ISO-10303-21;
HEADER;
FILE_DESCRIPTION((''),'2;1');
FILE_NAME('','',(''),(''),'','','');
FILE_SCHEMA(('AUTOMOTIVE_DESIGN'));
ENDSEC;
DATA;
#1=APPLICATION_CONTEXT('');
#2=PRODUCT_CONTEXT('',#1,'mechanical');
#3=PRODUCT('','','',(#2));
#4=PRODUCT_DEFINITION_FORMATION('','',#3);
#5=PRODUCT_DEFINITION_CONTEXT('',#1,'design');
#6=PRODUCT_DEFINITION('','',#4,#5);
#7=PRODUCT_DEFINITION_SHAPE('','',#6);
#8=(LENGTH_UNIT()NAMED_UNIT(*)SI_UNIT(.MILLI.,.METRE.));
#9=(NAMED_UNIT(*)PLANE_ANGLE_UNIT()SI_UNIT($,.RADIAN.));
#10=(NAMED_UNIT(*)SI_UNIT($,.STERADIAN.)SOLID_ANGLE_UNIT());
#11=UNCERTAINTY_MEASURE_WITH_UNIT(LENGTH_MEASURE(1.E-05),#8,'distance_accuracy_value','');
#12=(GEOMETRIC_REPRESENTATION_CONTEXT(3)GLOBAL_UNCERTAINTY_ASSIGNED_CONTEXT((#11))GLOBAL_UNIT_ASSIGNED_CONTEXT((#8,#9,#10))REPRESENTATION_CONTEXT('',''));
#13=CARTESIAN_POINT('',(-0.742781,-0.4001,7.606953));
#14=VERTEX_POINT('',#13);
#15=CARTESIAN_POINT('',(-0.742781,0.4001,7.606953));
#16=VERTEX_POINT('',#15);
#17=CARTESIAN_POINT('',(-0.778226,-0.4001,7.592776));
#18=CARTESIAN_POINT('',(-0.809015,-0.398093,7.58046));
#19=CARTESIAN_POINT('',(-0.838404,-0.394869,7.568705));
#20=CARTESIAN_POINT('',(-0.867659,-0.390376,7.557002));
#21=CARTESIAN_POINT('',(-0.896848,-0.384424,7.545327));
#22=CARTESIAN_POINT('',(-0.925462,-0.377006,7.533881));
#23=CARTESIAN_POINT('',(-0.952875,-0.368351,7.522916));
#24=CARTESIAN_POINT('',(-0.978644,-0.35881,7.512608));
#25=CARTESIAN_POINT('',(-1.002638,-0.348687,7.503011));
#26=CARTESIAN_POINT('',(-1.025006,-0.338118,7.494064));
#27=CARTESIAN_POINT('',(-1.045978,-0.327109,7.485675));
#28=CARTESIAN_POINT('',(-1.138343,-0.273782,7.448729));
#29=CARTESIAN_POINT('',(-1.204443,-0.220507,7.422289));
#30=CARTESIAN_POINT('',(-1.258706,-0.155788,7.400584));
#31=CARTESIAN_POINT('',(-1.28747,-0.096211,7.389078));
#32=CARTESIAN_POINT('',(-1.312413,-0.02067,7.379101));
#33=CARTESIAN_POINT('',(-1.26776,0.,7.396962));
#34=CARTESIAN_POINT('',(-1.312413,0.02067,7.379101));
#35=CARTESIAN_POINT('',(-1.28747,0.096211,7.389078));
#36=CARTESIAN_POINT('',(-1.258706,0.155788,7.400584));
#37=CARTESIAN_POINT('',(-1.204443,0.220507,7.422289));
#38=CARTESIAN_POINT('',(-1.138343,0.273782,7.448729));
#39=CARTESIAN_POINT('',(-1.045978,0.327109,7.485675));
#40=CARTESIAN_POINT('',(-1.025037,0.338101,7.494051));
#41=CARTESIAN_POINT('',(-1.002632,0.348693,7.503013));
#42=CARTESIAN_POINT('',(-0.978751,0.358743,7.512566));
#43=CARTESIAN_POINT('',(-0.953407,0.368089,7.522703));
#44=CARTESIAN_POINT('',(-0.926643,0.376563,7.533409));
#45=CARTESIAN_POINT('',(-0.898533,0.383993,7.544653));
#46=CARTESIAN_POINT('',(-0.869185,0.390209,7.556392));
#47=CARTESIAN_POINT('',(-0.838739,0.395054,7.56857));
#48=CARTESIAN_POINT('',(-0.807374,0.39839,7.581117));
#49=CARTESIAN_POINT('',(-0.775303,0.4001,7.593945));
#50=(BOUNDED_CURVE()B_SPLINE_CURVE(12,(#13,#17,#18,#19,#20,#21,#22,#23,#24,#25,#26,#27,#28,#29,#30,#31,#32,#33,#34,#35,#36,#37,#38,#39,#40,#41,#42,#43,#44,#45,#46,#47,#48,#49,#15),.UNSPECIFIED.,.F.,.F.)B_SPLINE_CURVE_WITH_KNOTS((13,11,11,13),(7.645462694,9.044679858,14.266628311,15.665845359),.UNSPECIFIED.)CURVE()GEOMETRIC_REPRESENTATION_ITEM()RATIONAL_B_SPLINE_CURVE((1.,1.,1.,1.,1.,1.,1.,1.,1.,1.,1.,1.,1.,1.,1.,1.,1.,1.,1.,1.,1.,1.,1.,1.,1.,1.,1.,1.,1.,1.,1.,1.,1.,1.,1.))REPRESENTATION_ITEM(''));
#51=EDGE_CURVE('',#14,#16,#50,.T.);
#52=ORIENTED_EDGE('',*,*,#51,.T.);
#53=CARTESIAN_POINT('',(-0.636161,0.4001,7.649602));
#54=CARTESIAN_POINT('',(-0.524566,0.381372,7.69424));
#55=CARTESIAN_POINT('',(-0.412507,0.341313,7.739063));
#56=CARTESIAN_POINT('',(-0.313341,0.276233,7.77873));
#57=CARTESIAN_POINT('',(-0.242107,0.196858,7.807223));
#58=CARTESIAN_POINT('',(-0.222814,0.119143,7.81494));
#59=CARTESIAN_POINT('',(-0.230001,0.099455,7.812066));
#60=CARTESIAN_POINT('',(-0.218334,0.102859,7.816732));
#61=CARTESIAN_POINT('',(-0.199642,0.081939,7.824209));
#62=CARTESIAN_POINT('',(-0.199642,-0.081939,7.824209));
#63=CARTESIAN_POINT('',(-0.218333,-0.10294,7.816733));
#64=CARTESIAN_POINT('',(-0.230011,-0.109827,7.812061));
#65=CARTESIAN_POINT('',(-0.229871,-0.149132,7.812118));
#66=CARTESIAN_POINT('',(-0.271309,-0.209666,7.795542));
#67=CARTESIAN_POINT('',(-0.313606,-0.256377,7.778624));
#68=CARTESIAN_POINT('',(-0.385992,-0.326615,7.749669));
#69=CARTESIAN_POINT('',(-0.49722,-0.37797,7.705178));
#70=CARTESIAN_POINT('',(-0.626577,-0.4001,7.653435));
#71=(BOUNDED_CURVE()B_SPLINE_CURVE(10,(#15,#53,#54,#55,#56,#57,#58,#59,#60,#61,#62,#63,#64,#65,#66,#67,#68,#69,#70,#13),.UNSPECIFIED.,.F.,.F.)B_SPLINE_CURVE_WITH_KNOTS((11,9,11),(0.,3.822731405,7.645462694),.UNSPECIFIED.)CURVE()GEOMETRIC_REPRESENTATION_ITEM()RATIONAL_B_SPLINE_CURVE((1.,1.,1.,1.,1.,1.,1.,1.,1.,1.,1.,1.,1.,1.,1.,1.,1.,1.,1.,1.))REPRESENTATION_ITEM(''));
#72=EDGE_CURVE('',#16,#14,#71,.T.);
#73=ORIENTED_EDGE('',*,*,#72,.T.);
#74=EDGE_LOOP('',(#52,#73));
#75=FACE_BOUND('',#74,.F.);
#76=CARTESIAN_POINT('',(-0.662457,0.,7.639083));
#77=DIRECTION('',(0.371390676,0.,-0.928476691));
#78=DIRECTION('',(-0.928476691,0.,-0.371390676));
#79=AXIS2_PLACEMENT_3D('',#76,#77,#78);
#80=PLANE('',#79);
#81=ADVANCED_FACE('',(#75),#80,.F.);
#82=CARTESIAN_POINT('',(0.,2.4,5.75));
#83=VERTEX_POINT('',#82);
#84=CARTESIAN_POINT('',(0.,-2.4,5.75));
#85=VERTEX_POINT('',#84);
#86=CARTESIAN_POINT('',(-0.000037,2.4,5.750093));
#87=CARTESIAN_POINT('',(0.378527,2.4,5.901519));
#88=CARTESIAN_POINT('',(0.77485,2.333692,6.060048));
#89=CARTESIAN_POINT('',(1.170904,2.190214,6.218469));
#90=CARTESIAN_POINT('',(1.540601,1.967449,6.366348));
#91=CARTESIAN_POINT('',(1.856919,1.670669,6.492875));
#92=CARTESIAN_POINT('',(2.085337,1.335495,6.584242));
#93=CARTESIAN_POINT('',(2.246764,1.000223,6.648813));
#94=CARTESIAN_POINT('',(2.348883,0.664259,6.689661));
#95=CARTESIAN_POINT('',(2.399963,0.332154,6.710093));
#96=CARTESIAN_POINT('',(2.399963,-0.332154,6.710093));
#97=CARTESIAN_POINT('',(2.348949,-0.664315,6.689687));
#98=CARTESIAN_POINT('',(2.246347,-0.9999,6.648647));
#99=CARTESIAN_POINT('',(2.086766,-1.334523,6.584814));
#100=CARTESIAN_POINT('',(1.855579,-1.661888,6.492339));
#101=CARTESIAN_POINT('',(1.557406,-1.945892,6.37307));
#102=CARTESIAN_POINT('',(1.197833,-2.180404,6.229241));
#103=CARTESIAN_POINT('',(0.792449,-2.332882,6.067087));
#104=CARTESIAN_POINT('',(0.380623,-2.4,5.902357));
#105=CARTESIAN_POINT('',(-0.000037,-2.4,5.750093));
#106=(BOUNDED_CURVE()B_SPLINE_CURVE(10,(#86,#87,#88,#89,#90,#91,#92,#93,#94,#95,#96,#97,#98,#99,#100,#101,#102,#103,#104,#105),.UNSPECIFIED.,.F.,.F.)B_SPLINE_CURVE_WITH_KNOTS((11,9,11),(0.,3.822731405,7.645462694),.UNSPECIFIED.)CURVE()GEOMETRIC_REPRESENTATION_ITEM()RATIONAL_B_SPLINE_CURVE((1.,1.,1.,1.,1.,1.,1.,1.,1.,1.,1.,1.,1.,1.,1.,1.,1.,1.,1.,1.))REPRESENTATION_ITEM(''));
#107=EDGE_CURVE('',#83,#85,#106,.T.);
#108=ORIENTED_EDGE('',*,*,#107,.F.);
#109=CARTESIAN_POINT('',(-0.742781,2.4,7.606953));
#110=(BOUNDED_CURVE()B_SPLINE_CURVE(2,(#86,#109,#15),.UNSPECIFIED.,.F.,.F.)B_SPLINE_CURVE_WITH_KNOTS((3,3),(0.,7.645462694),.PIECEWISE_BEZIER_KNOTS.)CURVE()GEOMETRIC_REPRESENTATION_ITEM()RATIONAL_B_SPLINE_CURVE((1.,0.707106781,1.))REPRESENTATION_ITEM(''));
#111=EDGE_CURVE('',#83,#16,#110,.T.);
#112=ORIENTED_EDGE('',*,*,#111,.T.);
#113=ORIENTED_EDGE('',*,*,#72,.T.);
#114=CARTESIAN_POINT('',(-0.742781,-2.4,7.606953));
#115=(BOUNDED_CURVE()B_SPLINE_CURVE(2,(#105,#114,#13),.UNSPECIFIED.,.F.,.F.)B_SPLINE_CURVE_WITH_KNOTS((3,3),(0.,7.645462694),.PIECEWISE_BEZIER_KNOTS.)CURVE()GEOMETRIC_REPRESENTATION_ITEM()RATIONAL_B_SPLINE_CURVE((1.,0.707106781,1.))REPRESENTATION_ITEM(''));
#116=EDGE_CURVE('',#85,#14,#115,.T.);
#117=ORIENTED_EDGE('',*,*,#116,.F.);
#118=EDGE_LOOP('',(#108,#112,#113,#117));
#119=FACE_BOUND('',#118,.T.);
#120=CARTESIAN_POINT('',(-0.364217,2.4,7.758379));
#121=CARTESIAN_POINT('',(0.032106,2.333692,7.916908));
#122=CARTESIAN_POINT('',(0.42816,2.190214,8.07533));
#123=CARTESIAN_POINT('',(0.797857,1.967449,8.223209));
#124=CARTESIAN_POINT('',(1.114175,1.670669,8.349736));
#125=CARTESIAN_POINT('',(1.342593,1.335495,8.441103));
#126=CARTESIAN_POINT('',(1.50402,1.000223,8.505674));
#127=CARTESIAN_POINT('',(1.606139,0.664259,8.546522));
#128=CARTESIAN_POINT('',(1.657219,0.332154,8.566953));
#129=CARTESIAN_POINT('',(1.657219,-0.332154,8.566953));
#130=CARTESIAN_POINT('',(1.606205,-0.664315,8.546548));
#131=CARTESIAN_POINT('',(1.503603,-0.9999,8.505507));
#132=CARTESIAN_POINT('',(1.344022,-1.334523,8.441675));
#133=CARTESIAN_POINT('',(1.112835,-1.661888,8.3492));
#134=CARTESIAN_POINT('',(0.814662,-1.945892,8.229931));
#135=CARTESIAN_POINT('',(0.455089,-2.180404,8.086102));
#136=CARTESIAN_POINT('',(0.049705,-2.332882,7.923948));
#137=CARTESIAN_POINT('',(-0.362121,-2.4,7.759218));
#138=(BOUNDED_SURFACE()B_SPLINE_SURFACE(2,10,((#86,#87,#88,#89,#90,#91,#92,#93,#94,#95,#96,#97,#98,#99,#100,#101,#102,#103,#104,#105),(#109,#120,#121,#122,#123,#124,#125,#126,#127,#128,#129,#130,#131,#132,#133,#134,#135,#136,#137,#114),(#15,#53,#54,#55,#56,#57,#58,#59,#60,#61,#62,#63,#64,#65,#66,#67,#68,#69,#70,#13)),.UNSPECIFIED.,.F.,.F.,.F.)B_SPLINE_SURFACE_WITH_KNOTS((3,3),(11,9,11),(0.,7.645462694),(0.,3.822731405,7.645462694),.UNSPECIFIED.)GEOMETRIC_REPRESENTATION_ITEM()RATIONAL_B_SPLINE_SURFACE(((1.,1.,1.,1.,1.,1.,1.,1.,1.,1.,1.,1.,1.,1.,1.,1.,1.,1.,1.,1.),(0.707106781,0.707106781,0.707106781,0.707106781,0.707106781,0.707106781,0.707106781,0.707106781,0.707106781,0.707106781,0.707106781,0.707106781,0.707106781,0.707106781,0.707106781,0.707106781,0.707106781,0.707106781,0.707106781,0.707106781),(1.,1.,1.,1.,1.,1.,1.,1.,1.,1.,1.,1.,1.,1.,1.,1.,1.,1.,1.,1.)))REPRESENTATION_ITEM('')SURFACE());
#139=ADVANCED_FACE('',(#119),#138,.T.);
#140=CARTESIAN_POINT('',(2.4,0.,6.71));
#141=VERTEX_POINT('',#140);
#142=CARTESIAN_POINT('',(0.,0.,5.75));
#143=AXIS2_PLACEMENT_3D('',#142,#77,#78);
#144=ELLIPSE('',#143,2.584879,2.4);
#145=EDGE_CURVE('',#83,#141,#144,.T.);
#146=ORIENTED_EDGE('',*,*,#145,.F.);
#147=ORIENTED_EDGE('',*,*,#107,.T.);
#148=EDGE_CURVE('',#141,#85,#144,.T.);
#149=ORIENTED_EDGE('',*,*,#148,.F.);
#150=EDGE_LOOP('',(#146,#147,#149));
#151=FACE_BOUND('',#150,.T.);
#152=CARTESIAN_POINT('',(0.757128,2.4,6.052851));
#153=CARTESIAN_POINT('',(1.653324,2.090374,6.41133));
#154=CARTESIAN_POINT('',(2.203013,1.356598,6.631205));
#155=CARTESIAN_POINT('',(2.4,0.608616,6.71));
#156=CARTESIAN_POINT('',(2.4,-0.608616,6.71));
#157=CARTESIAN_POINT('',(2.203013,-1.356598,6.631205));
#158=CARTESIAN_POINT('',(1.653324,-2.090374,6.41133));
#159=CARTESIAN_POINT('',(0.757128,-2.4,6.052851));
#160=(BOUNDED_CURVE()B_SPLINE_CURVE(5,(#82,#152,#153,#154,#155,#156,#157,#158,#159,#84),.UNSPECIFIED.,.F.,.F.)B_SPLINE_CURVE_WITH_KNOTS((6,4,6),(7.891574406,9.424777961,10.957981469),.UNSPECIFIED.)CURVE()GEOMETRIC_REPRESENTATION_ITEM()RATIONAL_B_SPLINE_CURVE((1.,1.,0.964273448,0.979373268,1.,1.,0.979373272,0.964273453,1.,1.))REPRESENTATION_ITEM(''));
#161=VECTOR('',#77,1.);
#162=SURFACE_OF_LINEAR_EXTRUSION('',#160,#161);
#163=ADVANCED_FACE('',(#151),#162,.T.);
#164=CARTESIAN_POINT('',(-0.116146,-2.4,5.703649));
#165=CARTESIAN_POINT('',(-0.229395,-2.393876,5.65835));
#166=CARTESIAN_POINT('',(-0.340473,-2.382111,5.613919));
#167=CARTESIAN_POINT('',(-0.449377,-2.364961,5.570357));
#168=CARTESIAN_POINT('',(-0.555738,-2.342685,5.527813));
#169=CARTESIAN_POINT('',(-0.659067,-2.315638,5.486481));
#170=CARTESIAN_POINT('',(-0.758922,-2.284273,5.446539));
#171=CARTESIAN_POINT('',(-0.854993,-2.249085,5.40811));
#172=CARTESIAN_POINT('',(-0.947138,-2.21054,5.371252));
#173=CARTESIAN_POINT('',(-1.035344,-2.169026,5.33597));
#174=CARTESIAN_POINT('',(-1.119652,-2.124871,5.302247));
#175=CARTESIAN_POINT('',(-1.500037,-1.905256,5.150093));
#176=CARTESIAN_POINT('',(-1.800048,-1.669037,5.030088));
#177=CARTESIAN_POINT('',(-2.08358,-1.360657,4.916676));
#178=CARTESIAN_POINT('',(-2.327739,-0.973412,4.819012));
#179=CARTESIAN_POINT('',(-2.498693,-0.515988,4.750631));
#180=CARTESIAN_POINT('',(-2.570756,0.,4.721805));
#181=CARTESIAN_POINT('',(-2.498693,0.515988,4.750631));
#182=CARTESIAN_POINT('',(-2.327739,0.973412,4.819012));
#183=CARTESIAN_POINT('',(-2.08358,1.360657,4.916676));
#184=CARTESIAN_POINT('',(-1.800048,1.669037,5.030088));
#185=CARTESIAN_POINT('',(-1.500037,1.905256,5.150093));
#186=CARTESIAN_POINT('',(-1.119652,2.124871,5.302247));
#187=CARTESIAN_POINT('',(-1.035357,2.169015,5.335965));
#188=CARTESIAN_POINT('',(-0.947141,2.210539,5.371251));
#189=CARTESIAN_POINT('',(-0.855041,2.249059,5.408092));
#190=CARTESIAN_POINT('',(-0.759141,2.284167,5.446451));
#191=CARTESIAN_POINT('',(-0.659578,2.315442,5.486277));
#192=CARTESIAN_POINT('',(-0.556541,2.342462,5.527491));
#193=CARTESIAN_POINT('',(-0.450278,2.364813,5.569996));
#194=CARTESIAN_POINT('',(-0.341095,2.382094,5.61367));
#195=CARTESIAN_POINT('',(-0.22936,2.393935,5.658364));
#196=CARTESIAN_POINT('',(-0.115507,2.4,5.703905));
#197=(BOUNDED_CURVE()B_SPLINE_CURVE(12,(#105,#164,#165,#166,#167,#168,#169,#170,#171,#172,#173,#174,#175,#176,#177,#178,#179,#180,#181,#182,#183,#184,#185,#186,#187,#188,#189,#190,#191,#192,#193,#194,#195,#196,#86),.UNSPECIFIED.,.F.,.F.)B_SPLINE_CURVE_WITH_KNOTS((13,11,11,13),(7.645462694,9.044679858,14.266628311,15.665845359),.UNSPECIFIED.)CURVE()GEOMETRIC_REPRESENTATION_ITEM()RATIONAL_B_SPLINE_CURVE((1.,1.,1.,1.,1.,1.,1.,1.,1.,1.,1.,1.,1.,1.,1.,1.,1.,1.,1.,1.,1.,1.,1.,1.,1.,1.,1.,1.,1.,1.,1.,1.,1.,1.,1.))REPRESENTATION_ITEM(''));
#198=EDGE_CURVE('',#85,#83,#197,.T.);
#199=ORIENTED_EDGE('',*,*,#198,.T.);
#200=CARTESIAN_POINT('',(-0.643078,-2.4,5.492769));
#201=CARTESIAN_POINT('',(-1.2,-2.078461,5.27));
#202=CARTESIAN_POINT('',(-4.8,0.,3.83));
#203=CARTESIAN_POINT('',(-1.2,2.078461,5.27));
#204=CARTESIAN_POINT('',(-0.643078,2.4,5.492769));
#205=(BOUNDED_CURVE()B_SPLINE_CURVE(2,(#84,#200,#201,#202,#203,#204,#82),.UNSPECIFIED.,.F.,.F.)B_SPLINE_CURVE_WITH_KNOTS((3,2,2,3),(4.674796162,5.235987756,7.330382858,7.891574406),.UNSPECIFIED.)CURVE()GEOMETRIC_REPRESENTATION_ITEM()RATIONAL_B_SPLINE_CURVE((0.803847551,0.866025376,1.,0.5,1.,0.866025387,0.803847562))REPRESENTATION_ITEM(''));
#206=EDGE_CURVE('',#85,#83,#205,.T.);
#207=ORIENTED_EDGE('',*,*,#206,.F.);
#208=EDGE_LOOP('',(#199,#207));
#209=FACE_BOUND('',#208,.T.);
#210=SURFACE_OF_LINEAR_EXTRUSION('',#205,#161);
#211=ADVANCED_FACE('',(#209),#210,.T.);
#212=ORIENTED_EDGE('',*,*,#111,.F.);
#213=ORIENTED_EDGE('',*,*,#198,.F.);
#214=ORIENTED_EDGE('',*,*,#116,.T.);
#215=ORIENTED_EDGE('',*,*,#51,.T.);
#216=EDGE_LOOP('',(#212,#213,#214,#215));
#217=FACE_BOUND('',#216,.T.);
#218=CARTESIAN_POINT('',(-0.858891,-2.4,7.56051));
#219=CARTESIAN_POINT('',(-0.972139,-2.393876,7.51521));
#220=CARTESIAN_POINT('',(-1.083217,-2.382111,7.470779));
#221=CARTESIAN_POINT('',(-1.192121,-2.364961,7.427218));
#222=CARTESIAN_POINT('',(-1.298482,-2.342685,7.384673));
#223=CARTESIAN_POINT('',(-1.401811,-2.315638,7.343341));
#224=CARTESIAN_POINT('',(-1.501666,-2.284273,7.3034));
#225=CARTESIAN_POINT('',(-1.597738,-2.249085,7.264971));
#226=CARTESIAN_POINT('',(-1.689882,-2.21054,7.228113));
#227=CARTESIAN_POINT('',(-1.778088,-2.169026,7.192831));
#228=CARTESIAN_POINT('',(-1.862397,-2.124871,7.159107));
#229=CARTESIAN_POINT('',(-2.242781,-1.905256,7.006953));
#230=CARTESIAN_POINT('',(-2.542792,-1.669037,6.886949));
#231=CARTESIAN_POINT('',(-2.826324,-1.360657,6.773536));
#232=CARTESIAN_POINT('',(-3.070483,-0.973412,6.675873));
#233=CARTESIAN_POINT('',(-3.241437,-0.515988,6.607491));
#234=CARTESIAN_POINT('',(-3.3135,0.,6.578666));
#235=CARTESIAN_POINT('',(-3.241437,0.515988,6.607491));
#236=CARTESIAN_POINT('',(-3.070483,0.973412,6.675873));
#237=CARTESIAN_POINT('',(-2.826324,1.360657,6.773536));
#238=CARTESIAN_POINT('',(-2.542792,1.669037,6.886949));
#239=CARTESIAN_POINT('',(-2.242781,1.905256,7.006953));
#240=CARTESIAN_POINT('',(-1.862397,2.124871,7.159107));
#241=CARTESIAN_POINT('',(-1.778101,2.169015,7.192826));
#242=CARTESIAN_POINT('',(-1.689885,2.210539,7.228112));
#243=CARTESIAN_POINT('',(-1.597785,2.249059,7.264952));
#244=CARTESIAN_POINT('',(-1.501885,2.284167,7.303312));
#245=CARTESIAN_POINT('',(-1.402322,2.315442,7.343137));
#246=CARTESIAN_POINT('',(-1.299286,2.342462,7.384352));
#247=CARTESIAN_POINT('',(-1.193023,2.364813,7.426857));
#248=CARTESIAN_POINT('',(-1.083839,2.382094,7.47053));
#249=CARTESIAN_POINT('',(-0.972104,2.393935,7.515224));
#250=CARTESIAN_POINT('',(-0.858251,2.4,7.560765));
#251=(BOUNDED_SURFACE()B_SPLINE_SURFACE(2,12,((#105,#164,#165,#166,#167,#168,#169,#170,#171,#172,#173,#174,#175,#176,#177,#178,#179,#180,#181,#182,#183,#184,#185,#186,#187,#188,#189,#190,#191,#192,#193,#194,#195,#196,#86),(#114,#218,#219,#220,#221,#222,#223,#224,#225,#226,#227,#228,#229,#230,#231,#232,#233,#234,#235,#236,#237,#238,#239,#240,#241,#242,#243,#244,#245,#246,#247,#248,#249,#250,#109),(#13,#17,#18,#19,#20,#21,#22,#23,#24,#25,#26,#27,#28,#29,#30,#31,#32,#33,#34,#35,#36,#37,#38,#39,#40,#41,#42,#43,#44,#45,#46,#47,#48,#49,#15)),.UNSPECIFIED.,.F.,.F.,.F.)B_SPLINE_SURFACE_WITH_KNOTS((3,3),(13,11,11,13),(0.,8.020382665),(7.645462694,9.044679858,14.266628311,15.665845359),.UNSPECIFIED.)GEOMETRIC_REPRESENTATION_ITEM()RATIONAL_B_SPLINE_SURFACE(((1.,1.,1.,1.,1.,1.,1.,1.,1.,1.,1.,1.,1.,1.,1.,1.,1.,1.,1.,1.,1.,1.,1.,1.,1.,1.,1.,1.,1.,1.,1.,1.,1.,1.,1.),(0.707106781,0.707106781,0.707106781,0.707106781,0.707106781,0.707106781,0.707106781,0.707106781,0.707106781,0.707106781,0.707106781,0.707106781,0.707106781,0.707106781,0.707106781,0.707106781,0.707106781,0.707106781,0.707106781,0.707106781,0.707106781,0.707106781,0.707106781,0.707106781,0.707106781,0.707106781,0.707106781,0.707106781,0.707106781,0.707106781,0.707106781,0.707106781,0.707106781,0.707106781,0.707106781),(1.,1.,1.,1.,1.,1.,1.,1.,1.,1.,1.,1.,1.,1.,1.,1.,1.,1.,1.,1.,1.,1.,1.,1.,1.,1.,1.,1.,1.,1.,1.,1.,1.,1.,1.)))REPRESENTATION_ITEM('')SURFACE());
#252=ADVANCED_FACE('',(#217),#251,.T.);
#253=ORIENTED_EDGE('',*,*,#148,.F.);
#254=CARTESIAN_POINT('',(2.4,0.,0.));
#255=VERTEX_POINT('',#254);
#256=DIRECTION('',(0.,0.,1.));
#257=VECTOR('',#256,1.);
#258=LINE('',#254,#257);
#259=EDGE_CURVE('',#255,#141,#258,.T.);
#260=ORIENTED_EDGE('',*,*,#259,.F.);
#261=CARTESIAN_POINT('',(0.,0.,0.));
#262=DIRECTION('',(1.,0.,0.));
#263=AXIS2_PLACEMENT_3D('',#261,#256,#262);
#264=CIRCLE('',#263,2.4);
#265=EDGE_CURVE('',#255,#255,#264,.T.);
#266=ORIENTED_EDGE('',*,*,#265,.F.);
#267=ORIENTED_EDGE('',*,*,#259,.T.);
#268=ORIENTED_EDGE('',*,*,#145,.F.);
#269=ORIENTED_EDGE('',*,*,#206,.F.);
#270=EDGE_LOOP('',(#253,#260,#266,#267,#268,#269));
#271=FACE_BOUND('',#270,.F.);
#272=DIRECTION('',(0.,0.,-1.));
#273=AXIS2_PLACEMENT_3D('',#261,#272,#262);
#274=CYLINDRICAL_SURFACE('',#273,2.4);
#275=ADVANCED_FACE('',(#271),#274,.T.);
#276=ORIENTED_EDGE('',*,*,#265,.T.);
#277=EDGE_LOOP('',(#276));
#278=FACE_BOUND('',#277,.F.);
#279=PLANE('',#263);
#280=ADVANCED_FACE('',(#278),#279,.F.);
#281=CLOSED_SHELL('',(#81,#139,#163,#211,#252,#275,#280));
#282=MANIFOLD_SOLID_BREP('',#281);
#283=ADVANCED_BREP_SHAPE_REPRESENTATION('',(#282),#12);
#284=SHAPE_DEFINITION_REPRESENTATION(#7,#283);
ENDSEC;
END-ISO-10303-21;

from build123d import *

# Parameters (mm, degrees)
F0_R     = 2.4
F1_DEPTH = 10
F3_DEPTH = 4
F5_DEPTH = 2
F6_R     = 1.9999


# Not quite as in the source:
# - a fillet or chamfer is up to 0.001 mm smaller than in the source, because OpenCascade refuses the exact size
# - a feature names something its author has since deleted; it is built from what else it names


with BuildPart() as f1:
    # F0 (on Top) → F1 (new body)
    with BuildSketch(Plane.XY):
        Circle(F0_R)
    extrude(amount=F1_DEPTH)

    # F2 (on Front) → F3 (cut, symmetric)
    with BuildSketch(Plane.XZ):
        Polygon((-2.5, 10.5), (-2.5, 4.75), (2.5, 6.75), (2.5, 10.5), align=None)
    extrude(amount=F3_DEPTH, both=True, mode=Mode.SUBTRACT)

    # F4 (on face) → F5 (join)
    with BuildSketch(Plane(origin=(-1.9827586207, 0, 4.9568965517), x_dir=(0.9284766909, 0, 0.3713906764), z_dir=(-0.3713906764, 0, 0.9284766909))):
        with BuildLine():
            add(Edge.make_bspline(
                [(2.135496578, 2.4), (4.7203754965, 2.3999998246), (4.7203754965, 0)],
                knots=[7.8915744057, 7.8915744057, 7.8915744057, 9.4247779608, 9.4247779608, 9.4247779608], degree=2, weights=[0.8038475615, 0.6339746132, 1]))
            add(Edge.make_bspline(
                [(2.1354967017, -2.4), (1.4428802648, -2.4000000778), (0.8430568353, -2.0784609691), (-3.0342618258, 0), (0.8430568353, 2.0784609691), (1.4428802074, 2.400000047), (2.135496578, 2.4)],
                knots=[4.6747961621, 4.6747961621, 4.6747961621, 5.235987756, 5.235987756, 7.3303828584, 7.3303828584, 7.8915744057, 7.8915744057, 7.8915744057], degree=2, weights=[0.8038475512, 0.8660253757, 1, 0.5, 1, 0.8660253868, 0.8038475615]))
            add(Edge.make_bspline(
                [(4.7203754965, 0), (4.7203754965, -2.3999997097), (2.1354967017, -2.4)],
                knots=[3.1415926536, 3.1415926536, 3.1415926536, 4.6747961621, 4.6747961621, 4.6747961621], degree=2, weights=[1, 0.6339746243, 0.8038475512]))
        make_face()
    extrude(amount=F5_DEPTH)

    # F6 (radius 2 in the source; OpenCascade refuses exactly that, so slightly less here)
    f6_edges = [f1.edges().sort_by_distance(p)[0] for p in [
        (1.029171, -1.618698, 8.315734),
        (-3.142781, 0, 6.646953),
        (1.029171, 1.618698, 8.315734),
    ]]
    fillet(f6_edges, radius=F6_R)


solid = f1.part
